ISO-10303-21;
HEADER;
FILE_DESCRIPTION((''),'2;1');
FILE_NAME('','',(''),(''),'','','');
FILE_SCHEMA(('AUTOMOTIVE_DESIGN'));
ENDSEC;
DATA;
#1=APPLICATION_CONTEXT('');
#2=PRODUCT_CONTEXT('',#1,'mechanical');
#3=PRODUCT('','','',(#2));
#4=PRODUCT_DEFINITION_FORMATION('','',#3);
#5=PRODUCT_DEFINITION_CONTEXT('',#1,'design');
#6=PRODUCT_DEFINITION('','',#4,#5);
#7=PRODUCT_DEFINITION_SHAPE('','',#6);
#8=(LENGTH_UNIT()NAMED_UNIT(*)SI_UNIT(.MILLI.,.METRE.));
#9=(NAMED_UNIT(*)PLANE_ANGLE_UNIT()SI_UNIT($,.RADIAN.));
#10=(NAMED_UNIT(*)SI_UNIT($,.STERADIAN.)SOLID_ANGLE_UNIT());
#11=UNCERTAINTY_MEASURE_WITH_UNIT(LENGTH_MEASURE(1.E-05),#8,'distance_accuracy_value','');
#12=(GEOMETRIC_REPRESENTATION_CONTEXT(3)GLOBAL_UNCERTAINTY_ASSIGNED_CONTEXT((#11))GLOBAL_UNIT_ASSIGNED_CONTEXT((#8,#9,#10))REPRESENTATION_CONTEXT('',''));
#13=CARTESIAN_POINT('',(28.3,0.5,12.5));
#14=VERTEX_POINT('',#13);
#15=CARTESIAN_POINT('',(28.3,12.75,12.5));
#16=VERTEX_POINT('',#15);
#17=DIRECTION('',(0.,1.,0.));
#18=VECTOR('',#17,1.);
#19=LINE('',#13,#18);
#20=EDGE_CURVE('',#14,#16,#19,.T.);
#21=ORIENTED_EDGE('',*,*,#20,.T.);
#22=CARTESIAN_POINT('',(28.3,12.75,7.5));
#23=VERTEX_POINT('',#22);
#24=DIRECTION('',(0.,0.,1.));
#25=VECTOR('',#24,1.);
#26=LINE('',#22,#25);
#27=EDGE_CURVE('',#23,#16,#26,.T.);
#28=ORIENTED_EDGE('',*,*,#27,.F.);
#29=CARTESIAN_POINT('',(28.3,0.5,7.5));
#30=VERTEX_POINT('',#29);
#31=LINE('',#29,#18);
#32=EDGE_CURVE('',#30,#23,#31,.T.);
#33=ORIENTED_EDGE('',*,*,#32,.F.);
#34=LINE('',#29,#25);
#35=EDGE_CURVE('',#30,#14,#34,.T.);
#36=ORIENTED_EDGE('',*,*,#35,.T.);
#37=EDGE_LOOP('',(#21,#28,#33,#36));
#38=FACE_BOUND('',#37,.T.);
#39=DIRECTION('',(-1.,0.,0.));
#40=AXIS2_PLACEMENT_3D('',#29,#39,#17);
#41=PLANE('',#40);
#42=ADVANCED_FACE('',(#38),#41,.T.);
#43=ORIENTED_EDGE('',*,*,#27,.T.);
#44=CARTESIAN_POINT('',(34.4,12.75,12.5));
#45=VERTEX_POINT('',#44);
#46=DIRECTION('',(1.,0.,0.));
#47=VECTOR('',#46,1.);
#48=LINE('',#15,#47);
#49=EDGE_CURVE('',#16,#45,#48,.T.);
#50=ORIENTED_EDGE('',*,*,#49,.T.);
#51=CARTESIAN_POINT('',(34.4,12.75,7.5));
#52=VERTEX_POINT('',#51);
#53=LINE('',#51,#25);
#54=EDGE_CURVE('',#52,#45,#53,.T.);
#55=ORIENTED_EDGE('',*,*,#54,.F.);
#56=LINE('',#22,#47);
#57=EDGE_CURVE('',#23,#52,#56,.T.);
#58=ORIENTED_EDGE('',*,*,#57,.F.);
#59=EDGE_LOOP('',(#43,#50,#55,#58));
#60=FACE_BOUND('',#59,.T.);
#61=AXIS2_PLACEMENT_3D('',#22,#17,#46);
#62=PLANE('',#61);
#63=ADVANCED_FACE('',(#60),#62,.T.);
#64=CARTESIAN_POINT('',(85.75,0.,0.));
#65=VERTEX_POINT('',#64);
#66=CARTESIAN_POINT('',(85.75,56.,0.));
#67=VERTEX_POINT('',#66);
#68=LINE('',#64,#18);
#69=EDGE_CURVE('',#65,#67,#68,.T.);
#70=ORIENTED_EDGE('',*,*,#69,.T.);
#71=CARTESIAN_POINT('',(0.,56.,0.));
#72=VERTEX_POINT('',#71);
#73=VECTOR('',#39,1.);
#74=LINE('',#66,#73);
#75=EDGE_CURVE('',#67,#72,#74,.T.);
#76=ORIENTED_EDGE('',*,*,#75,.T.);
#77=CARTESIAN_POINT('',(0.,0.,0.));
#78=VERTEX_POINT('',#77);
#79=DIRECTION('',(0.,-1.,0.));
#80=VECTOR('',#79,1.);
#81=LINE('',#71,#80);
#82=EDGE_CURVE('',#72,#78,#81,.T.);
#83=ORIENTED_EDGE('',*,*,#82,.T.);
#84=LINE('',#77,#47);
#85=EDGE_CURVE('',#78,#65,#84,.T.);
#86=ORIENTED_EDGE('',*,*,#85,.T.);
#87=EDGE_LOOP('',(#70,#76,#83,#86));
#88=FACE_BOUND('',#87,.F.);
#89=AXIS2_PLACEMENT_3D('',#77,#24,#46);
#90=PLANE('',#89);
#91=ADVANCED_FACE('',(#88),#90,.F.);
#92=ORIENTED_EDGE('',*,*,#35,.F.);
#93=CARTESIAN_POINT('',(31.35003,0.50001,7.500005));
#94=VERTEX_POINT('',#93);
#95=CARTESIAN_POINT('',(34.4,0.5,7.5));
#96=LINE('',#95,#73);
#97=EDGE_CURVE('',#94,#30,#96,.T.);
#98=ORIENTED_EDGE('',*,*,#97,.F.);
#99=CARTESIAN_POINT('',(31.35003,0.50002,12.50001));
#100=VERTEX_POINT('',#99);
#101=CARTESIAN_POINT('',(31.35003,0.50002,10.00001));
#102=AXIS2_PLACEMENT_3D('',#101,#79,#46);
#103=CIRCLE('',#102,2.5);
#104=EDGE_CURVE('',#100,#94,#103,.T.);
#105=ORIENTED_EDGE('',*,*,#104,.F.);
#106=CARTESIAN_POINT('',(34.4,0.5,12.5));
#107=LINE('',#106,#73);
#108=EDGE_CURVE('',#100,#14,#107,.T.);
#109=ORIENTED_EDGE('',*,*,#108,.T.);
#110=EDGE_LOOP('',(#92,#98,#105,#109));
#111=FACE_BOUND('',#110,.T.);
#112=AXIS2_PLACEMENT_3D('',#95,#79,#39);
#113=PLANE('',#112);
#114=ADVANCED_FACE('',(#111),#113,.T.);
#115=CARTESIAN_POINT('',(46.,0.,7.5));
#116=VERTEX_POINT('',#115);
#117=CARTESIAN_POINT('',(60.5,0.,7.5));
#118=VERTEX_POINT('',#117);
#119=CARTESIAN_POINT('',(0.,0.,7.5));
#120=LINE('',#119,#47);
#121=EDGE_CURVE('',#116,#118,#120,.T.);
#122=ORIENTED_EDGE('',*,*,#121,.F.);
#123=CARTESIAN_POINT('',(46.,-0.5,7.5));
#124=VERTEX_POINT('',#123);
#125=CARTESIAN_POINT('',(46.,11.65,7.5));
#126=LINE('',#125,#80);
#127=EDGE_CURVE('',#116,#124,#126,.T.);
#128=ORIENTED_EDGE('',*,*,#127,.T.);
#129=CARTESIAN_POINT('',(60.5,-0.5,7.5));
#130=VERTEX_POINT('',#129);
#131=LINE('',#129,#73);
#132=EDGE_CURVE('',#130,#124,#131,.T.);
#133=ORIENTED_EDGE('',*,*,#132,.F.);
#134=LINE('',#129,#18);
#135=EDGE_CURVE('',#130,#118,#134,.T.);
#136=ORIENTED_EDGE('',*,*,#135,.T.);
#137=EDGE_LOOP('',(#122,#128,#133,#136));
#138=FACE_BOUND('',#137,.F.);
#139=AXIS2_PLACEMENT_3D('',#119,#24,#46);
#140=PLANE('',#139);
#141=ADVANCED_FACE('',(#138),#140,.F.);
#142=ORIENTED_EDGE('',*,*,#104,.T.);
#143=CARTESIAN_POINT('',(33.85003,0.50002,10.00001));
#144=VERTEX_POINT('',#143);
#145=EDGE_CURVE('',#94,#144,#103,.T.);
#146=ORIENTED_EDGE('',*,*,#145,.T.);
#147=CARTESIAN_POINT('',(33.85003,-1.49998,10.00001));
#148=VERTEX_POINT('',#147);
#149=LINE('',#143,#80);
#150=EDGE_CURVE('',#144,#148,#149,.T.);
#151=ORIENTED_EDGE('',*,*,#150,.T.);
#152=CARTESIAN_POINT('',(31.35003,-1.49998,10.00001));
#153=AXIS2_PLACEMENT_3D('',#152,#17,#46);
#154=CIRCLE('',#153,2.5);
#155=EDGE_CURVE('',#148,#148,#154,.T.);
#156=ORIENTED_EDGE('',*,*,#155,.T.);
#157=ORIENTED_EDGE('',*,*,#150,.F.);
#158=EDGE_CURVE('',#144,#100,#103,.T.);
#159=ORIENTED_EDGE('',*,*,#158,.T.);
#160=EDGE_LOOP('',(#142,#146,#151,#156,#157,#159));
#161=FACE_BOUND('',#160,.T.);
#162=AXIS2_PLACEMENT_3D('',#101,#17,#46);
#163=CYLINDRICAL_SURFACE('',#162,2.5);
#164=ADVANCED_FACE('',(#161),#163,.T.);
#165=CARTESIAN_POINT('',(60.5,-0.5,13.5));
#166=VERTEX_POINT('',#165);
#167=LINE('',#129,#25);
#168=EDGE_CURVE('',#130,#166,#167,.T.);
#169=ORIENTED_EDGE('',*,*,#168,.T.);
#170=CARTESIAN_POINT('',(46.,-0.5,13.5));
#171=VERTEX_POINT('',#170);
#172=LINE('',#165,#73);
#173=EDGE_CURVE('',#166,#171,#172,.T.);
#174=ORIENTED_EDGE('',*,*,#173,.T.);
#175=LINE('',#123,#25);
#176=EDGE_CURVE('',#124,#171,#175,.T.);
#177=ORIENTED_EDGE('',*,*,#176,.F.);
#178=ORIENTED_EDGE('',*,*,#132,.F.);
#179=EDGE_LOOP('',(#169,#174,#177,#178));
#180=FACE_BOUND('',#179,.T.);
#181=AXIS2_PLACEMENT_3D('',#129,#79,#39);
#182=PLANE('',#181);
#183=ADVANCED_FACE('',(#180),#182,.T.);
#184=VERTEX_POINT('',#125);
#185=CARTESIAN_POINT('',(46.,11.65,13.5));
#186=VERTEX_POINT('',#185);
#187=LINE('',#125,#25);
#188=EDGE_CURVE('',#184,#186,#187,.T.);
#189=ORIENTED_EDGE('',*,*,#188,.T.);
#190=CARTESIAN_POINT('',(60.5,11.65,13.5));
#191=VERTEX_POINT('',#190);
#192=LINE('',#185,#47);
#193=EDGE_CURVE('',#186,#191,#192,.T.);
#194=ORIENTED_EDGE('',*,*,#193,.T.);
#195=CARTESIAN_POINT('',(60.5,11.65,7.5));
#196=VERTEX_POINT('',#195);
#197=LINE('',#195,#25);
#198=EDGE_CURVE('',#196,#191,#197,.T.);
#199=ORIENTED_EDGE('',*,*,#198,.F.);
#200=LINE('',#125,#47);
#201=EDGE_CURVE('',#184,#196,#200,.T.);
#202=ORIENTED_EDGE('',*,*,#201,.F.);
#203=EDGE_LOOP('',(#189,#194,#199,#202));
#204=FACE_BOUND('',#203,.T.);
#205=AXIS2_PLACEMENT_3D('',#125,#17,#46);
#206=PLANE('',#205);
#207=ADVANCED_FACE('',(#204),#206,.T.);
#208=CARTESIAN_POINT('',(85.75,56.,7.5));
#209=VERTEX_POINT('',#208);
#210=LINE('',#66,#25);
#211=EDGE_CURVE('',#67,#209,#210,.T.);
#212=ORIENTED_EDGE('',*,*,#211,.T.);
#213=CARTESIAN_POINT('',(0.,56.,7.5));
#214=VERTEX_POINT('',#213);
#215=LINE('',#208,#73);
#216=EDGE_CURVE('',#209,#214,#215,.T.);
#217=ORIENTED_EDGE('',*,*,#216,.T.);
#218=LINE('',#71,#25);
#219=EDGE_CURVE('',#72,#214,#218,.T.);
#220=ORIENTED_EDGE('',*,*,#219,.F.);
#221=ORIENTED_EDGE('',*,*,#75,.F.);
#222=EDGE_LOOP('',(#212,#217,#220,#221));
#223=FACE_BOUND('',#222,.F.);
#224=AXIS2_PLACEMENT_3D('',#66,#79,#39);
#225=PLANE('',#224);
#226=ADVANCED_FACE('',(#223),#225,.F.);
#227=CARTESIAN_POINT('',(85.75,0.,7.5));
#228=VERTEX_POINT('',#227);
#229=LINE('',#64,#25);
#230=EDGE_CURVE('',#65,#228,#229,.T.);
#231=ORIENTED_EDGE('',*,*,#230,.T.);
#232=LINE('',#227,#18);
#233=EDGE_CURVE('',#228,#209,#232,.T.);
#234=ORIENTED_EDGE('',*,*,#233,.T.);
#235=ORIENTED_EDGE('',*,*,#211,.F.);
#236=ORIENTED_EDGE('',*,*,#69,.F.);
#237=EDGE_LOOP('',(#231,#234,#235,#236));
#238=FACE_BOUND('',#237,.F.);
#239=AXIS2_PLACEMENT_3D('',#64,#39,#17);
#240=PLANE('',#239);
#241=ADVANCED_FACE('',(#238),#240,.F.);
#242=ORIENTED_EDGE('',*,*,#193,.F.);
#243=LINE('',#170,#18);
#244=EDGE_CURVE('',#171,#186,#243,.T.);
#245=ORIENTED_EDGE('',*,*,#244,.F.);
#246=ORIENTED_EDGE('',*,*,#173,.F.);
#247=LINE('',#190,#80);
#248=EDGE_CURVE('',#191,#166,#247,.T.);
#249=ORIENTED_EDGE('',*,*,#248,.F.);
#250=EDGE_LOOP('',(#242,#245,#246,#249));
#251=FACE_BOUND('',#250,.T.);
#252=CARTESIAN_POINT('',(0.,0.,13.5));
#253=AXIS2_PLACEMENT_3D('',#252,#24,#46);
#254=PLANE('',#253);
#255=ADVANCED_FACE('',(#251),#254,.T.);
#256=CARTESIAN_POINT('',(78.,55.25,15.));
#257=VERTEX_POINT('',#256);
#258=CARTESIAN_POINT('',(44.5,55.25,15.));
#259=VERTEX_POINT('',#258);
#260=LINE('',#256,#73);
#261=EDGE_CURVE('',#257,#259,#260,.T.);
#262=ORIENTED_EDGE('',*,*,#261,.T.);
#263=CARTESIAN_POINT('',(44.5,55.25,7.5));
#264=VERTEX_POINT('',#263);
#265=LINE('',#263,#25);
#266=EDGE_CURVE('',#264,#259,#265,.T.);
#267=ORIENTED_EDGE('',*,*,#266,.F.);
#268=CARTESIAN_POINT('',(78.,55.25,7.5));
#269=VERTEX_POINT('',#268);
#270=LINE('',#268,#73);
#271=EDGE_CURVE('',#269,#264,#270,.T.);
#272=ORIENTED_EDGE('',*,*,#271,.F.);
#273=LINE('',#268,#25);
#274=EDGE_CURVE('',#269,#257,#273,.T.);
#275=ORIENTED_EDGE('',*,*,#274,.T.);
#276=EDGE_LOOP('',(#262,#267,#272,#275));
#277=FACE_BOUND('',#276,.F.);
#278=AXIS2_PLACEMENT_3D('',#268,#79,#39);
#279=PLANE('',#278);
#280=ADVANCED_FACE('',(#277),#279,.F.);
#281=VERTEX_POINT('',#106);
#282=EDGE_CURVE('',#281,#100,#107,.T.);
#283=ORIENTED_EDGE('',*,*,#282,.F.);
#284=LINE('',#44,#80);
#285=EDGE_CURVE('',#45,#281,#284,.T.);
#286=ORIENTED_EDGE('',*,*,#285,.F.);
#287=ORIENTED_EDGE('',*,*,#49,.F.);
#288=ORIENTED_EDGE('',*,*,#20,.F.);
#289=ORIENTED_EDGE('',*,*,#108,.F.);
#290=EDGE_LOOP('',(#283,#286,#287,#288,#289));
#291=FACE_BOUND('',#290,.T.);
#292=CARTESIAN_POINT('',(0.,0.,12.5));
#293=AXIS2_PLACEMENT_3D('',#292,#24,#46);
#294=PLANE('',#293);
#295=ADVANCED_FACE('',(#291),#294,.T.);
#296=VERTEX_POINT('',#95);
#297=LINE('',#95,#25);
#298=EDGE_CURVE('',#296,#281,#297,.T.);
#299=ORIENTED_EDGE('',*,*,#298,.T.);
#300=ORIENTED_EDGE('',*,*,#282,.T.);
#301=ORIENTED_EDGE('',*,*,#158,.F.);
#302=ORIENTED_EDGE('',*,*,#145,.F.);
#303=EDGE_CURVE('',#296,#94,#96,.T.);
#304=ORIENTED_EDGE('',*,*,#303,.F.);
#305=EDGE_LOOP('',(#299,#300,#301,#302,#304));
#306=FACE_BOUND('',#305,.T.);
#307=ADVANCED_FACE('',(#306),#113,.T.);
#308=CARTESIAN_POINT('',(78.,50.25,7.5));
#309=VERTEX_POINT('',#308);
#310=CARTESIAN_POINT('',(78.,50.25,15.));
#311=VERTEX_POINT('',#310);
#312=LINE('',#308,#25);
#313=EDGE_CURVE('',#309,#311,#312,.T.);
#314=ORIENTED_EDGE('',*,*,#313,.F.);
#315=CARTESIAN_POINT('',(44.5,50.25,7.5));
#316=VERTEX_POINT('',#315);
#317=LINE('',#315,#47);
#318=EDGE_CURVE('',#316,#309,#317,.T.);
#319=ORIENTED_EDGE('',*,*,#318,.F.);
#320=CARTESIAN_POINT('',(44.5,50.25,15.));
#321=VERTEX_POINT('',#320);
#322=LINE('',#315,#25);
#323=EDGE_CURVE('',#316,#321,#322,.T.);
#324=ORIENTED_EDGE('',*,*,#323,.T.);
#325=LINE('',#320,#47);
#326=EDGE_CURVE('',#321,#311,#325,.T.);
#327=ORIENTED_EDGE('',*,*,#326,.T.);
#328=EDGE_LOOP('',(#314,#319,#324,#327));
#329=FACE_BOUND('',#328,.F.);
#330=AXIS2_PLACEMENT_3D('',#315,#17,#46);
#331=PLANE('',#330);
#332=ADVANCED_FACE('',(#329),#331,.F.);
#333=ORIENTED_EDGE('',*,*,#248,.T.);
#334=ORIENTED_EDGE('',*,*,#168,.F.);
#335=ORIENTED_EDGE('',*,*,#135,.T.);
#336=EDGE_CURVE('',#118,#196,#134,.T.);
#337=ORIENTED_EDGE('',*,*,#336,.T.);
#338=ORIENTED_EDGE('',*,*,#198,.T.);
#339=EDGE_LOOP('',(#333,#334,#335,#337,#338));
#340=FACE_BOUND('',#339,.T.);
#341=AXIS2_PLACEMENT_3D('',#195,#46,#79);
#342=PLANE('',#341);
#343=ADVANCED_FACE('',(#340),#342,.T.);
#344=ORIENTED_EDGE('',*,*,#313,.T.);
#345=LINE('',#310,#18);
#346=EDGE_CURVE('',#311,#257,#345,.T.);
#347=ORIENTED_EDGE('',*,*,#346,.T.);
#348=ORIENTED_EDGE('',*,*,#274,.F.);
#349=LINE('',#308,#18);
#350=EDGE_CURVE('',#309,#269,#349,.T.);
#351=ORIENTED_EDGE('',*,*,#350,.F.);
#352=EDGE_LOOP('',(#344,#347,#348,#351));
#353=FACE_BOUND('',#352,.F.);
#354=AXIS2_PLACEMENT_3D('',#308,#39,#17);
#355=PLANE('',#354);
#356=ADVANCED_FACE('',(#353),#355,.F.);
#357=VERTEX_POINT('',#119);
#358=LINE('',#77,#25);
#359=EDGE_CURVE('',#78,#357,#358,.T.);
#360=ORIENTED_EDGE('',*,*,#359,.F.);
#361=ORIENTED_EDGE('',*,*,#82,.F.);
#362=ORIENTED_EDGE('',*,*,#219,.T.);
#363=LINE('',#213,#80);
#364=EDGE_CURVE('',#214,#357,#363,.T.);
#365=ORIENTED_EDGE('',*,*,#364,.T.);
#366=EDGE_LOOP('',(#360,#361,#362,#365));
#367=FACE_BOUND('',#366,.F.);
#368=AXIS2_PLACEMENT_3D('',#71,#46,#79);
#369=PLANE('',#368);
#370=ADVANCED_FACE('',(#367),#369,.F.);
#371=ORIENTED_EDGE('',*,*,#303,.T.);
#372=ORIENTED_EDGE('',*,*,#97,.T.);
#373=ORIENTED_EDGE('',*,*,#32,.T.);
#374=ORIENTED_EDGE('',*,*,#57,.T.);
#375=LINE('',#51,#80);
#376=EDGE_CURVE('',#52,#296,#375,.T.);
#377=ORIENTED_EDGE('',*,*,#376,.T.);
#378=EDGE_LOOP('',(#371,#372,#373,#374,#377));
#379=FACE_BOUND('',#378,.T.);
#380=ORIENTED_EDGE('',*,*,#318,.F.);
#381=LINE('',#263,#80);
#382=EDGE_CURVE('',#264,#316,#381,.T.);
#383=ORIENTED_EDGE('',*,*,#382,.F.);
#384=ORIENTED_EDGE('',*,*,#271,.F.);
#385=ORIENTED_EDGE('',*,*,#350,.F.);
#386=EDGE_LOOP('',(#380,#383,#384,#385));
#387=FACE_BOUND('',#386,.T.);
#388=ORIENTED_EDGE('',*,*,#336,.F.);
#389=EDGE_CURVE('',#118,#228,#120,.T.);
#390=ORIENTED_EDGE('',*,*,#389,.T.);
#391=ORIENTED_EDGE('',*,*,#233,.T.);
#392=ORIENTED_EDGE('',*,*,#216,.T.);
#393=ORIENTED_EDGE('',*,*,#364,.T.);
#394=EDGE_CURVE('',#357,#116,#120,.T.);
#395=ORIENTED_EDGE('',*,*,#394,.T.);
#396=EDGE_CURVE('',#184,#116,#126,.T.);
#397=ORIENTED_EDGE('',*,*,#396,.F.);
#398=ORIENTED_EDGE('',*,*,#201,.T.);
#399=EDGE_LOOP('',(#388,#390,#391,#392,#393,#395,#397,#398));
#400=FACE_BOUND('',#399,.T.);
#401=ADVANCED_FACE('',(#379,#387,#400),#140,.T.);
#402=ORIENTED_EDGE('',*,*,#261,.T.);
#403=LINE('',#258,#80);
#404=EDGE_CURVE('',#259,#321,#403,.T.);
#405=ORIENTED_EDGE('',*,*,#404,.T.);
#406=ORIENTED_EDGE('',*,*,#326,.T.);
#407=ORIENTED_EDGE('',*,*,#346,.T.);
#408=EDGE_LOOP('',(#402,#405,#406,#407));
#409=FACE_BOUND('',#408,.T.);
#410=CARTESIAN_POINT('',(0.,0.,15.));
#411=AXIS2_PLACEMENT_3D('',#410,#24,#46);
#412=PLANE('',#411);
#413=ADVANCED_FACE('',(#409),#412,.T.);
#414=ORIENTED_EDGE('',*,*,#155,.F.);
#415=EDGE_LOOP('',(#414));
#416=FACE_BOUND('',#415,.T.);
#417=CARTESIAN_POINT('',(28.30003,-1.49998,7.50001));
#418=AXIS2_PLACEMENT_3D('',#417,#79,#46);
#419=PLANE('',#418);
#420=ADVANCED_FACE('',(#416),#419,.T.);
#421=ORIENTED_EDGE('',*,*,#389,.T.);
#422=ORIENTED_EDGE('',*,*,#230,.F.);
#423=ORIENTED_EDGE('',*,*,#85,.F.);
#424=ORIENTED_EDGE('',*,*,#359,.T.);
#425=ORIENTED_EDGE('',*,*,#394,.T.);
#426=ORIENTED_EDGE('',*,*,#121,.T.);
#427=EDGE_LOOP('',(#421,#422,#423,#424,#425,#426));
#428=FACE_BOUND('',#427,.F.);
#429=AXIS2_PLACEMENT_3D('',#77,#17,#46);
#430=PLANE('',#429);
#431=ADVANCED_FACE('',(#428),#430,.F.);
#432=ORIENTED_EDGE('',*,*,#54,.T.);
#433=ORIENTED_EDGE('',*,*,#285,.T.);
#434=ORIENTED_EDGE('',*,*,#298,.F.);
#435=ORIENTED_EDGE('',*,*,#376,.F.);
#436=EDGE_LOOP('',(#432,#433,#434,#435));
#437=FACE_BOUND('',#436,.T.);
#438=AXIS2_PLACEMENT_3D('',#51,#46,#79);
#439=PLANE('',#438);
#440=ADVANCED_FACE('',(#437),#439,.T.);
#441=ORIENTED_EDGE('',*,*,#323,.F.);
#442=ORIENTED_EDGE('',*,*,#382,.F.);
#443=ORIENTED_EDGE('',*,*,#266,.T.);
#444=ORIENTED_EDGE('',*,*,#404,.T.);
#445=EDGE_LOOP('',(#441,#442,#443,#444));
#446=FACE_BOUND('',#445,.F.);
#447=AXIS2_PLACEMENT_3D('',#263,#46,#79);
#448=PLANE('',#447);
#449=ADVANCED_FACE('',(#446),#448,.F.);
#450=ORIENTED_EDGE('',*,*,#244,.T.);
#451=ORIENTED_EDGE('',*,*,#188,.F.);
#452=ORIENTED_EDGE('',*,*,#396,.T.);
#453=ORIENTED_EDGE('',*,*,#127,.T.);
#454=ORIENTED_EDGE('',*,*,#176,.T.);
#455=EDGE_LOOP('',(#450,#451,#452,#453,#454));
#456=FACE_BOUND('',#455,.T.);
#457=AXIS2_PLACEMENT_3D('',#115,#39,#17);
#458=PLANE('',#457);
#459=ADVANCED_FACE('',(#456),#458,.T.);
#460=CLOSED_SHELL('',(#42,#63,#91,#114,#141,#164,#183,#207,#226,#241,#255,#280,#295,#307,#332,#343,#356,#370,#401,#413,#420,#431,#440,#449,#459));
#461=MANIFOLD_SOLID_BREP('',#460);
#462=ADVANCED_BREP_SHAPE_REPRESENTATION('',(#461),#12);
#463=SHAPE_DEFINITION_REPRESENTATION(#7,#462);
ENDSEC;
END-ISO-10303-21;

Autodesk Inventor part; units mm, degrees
ref_plane "YZ Plane" through (0, 0, 0) normal (1, 0, 0) x (0, 1, 0)
ref_plane "XZ Plane" through (0, 0, 0) normal (0, 1, 0) x (-1, 0, 0)
ref_plane "XY Plane" through (0, 0, 0) normal (0, 0, 1) x (1, 0, 0)
sketch "Sketch1" plane through (0, 0, 0) normal (0, 0, 1) x (1, 0, 0)
  line L0 (0, 0) -> (85.75, 0)
  line L1 (85.75, 0) -> (85.75, 56)
  line L2 (85.75, 56) -> (0, 56)
  line L3 (0, 56) -> (0, 0)
  dimension "d0" = 85.75
  dimension "d1" = 56
extrude "Extrusion1" add sketch "Sketch1" along normal blind 7.5
sketch "Sketch3" plane through (0, 0, 7.5) normal (0, 0, 1) x (1, 0, 0)
  line L0 (78, 55.25) -> (44.5, 55.25)
  line L1 (44.5, 55.25) -> (44.5, 50.25)
  line L2 (44.5, 50.25) -> (78, 50.25)
  line L3 (78, 50.25) -> (78, 55.25)
  line L4 (85.75, 56) -> (0, 56) projected
  line L5 (85.75, 0) -> (85.75, 56) projected
  point P0 (0, 0)
  dimension "d19" = 33.5
  dimension "d20" = 5
  dimension "d21" = 0.75
  dimension "d22" = 7.75
extrude "Extrusion3" add sketch "Sketch3" along normal blind 7.5
sketch "Sketch4" plane through (0, 0, 7.5) normal (0, 0, 1) x (1, 0, 0)
  line L0 (46, 11.65) -> (60.5, 11.65)
  line L1 (60.5, 11.65) -> (60.5, -0.5)
  line L2 (60.5, -0.5) -> (46, -0.5)
  line L3 (46, -0.5) -> (46, 11.65)
  line L4 (0, 0) -> (85.75, 0) projected
  line L5 (85.75, 0) -> (85.75, 56) projected
  dimension "d25" = 14.5
  dimension "d26" = 12.15
  dimension "d28" = 0.5
  dimension "d29" = 25.25
extrude "Extrusion4" add sketch "Sketch4" along normal blind 6
sketch "Sketch5" plane through (0, 0, 7.5) normal (0, 0, 1) x (1, 0, 0)
  line L0 (28.3, 12.75) -> (34.4, 12.75)
  line L1 (34.4, 12.75) -> (34.4, 0.5)
  line L2 (34.4, 0.5) -> (28.3, 0.5)
  line L3 (28.3, 0.5) -> (28.3, 12.75)
  line L4 (0, 0) -> (46, 0) projected
  line L5 (0, 56) -> (0, 0) projected
  dimension "d32" = 12.25
  dimension "d33" = 6.1
  dimension "d35" = 28.3
  dimension "d36" = 0.5
extrude "Extrusion5" add sketch "Sketch5" along normal blind 5
sketch "Sketch6" plane through (28.3, 0.5, 7.5) normal (0, -1, 0) x (1, 0, 0)
  line L0 (6.1, 5) -> (0, 5) projected
  line L1 (3.05, 5) -> (3.05, 2.5)
  circle A0 centre (3.05, 2.5) radius 2.5
  point P0 (-28.3, -7.5)
  dimension "d39" = 2.5
  dimension "d40" = 5
extrude "Extrusion6" add sketch "Sketch6" along normal blind 2
properties part number "RaspberryPi3_Screen"
